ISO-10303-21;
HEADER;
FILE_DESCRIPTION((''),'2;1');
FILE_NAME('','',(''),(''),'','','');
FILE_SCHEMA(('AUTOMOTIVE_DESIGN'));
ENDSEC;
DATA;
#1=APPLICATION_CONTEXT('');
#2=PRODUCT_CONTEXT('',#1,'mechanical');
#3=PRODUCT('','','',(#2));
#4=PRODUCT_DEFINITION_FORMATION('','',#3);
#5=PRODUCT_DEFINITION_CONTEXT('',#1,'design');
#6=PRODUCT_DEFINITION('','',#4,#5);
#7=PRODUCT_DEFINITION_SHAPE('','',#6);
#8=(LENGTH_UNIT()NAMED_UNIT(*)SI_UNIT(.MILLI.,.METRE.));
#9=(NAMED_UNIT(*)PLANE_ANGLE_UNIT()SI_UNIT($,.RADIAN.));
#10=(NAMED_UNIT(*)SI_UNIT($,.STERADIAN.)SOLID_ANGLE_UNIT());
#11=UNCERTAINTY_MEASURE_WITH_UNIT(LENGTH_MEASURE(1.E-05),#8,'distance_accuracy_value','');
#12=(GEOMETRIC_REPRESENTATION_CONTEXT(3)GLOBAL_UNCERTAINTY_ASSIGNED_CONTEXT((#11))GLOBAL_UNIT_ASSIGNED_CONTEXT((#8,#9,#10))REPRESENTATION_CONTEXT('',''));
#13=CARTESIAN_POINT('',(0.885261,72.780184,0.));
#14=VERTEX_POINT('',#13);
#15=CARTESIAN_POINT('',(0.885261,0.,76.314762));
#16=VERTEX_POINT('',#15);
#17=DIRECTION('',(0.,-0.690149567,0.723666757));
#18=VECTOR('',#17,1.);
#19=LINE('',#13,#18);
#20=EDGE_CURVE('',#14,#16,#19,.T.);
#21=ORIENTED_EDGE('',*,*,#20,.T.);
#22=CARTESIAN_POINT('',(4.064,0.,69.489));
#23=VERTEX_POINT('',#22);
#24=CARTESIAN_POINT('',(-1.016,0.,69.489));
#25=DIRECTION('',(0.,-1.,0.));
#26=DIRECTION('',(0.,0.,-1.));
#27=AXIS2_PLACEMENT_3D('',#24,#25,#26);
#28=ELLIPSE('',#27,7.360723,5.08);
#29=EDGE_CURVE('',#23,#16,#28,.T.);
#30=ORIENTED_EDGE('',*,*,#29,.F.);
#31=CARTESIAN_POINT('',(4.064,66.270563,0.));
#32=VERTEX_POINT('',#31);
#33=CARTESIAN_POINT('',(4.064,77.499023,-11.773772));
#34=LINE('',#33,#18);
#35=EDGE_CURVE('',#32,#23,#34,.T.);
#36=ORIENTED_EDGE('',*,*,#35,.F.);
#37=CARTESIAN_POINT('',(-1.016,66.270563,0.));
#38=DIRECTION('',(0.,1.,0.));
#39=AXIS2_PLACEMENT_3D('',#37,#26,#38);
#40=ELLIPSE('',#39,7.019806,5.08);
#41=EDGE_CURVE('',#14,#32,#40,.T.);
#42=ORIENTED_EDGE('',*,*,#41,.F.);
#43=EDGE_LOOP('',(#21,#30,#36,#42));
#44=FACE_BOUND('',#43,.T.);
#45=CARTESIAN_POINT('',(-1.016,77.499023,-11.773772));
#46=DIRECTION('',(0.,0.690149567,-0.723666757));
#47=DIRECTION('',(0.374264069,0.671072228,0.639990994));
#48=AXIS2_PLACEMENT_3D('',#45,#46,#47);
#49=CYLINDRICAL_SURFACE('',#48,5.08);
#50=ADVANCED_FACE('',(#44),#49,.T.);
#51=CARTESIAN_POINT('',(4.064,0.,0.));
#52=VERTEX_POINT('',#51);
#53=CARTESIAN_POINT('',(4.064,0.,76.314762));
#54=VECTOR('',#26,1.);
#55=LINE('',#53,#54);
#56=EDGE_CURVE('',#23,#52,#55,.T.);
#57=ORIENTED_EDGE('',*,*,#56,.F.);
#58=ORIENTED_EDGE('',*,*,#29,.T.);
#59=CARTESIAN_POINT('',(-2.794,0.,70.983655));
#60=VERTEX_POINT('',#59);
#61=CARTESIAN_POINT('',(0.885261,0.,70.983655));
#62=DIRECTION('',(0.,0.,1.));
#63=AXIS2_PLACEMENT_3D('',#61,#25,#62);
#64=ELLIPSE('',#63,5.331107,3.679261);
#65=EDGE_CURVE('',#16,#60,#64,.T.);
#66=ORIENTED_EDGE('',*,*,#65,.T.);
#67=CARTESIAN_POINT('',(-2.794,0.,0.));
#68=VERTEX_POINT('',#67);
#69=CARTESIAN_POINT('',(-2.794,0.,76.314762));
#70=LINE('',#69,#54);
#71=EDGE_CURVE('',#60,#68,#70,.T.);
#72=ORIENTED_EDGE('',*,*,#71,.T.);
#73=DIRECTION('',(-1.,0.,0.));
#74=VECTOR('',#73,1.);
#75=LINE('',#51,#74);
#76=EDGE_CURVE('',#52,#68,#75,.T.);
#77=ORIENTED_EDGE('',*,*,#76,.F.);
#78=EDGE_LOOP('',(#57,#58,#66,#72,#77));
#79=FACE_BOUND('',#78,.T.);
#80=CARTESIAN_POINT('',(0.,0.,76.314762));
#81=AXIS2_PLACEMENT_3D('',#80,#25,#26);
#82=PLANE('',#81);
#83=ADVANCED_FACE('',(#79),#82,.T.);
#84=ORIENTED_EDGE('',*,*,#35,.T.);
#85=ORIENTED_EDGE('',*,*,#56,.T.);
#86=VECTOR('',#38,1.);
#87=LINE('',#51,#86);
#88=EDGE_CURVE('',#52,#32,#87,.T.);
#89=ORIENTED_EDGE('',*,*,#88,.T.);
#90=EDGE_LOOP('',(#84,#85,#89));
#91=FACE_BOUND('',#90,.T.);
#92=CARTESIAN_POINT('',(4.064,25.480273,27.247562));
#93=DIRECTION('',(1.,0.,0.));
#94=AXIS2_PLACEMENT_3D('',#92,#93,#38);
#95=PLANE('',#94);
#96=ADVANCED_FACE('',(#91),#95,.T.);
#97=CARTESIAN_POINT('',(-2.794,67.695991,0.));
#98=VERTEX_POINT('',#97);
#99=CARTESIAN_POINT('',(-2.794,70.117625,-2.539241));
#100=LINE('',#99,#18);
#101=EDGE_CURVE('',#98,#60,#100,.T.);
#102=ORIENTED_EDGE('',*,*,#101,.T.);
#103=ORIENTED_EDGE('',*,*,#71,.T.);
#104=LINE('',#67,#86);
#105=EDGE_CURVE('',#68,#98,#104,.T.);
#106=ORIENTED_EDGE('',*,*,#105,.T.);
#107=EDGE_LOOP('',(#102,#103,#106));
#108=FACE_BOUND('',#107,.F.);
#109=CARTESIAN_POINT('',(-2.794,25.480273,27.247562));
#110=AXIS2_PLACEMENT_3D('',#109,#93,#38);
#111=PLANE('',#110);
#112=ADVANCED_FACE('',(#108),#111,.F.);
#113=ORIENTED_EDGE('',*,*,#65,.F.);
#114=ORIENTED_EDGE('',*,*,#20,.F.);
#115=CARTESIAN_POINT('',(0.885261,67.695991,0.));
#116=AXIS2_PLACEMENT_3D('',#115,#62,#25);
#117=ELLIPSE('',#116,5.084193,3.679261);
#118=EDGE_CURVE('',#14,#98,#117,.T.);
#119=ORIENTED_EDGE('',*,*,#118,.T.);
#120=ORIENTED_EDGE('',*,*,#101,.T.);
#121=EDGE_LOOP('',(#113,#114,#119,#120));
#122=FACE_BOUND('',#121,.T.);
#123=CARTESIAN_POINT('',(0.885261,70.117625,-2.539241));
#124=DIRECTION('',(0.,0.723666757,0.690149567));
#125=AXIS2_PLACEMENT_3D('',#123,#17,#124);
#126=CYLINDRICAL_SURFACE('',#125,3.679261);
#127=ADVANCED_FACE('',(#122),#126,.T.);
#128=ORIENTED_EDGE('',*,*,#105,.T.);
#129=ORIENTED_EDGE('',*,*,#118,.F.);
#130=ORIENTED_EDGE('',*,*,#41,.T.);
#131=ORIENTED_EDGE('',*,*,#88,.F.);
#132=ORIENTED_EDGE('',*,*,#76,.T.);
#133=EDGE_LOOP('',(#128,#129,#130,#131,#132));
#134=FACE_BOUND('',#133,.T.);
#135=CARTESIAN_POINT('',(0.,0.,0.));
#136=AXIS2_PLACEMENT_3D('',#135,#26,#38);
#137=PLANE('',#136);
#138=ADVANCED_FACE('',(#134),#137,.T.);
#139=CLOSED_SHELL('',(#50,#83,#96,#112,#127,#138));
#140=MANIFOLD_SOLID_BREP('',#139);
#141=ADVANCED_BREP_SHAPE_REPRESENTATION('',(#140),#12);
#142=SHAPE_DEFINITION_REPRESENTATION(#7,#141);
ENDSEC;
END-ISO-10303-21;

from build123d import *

# Parameters (mm, degrees)
F1_DEPTH    = 4.064
F2_DEPTH    = 2.794
F3_R        = 3.6792614691
F4_T1_DEPTH = 129.0096523961


# Not quite as in the source:
# - a fillet or chamfer that OpenCascade refuses, or shapes differently, is made with other operations: its cross-section is extruded or revolved along the edge and cut away or added


with BuildPart() as f1:
    # F0 (on Right) → F1 (new body)
    with BuildSketch(Plane.YZ):
        Polygon((72.7801844478, 0), (0, 76.3147622347), (0, 0), align=None)
    extrude(amount=F1_DEPTH)

    # F2 (add): a face of the model
    f2_faces = [f1.faces().sort_by_distance(p)[0] for p in [
        (0, 24.2600614826, 25.4382540782),
    ]]
    extrude(f2_faces, amount=F2_DEPTH)

    # F3
    f3_edges = [f1.edges().sort_by_distance(p)[0] for p in [
        (-2.794, 36.390092, 38.157381),
    ]]
    fillet(f3_edges, radius=F3_R)

    # F4: fillet of radius 5.08 on 1 edges, made by hand

    # F4_s2 → F4_t1 (cut)
    with BuildSketch(Plane(origin=(0, 42.7935550314, -44.8718288113), x_dir=(1, 0, 0), z_dir=(0, -0.6901495666, 0.7236667574))):
        with BuildLine():
            ThreePointArc((0.8852614691, 52.6686000807), (3.1949861234, 50.7992812188), (4.064, 47.9578034574))
            Line((4.064, 47.9578034574), (4.064, 52.6686000807))
            Line((4.064, 52.6686000807), (0.8852614691, 52.6686000807))
        make_face()
    extrude(amount=F4_T1_DEPTH, mode=Mode.SUBTRACT)


solid = f1.part
